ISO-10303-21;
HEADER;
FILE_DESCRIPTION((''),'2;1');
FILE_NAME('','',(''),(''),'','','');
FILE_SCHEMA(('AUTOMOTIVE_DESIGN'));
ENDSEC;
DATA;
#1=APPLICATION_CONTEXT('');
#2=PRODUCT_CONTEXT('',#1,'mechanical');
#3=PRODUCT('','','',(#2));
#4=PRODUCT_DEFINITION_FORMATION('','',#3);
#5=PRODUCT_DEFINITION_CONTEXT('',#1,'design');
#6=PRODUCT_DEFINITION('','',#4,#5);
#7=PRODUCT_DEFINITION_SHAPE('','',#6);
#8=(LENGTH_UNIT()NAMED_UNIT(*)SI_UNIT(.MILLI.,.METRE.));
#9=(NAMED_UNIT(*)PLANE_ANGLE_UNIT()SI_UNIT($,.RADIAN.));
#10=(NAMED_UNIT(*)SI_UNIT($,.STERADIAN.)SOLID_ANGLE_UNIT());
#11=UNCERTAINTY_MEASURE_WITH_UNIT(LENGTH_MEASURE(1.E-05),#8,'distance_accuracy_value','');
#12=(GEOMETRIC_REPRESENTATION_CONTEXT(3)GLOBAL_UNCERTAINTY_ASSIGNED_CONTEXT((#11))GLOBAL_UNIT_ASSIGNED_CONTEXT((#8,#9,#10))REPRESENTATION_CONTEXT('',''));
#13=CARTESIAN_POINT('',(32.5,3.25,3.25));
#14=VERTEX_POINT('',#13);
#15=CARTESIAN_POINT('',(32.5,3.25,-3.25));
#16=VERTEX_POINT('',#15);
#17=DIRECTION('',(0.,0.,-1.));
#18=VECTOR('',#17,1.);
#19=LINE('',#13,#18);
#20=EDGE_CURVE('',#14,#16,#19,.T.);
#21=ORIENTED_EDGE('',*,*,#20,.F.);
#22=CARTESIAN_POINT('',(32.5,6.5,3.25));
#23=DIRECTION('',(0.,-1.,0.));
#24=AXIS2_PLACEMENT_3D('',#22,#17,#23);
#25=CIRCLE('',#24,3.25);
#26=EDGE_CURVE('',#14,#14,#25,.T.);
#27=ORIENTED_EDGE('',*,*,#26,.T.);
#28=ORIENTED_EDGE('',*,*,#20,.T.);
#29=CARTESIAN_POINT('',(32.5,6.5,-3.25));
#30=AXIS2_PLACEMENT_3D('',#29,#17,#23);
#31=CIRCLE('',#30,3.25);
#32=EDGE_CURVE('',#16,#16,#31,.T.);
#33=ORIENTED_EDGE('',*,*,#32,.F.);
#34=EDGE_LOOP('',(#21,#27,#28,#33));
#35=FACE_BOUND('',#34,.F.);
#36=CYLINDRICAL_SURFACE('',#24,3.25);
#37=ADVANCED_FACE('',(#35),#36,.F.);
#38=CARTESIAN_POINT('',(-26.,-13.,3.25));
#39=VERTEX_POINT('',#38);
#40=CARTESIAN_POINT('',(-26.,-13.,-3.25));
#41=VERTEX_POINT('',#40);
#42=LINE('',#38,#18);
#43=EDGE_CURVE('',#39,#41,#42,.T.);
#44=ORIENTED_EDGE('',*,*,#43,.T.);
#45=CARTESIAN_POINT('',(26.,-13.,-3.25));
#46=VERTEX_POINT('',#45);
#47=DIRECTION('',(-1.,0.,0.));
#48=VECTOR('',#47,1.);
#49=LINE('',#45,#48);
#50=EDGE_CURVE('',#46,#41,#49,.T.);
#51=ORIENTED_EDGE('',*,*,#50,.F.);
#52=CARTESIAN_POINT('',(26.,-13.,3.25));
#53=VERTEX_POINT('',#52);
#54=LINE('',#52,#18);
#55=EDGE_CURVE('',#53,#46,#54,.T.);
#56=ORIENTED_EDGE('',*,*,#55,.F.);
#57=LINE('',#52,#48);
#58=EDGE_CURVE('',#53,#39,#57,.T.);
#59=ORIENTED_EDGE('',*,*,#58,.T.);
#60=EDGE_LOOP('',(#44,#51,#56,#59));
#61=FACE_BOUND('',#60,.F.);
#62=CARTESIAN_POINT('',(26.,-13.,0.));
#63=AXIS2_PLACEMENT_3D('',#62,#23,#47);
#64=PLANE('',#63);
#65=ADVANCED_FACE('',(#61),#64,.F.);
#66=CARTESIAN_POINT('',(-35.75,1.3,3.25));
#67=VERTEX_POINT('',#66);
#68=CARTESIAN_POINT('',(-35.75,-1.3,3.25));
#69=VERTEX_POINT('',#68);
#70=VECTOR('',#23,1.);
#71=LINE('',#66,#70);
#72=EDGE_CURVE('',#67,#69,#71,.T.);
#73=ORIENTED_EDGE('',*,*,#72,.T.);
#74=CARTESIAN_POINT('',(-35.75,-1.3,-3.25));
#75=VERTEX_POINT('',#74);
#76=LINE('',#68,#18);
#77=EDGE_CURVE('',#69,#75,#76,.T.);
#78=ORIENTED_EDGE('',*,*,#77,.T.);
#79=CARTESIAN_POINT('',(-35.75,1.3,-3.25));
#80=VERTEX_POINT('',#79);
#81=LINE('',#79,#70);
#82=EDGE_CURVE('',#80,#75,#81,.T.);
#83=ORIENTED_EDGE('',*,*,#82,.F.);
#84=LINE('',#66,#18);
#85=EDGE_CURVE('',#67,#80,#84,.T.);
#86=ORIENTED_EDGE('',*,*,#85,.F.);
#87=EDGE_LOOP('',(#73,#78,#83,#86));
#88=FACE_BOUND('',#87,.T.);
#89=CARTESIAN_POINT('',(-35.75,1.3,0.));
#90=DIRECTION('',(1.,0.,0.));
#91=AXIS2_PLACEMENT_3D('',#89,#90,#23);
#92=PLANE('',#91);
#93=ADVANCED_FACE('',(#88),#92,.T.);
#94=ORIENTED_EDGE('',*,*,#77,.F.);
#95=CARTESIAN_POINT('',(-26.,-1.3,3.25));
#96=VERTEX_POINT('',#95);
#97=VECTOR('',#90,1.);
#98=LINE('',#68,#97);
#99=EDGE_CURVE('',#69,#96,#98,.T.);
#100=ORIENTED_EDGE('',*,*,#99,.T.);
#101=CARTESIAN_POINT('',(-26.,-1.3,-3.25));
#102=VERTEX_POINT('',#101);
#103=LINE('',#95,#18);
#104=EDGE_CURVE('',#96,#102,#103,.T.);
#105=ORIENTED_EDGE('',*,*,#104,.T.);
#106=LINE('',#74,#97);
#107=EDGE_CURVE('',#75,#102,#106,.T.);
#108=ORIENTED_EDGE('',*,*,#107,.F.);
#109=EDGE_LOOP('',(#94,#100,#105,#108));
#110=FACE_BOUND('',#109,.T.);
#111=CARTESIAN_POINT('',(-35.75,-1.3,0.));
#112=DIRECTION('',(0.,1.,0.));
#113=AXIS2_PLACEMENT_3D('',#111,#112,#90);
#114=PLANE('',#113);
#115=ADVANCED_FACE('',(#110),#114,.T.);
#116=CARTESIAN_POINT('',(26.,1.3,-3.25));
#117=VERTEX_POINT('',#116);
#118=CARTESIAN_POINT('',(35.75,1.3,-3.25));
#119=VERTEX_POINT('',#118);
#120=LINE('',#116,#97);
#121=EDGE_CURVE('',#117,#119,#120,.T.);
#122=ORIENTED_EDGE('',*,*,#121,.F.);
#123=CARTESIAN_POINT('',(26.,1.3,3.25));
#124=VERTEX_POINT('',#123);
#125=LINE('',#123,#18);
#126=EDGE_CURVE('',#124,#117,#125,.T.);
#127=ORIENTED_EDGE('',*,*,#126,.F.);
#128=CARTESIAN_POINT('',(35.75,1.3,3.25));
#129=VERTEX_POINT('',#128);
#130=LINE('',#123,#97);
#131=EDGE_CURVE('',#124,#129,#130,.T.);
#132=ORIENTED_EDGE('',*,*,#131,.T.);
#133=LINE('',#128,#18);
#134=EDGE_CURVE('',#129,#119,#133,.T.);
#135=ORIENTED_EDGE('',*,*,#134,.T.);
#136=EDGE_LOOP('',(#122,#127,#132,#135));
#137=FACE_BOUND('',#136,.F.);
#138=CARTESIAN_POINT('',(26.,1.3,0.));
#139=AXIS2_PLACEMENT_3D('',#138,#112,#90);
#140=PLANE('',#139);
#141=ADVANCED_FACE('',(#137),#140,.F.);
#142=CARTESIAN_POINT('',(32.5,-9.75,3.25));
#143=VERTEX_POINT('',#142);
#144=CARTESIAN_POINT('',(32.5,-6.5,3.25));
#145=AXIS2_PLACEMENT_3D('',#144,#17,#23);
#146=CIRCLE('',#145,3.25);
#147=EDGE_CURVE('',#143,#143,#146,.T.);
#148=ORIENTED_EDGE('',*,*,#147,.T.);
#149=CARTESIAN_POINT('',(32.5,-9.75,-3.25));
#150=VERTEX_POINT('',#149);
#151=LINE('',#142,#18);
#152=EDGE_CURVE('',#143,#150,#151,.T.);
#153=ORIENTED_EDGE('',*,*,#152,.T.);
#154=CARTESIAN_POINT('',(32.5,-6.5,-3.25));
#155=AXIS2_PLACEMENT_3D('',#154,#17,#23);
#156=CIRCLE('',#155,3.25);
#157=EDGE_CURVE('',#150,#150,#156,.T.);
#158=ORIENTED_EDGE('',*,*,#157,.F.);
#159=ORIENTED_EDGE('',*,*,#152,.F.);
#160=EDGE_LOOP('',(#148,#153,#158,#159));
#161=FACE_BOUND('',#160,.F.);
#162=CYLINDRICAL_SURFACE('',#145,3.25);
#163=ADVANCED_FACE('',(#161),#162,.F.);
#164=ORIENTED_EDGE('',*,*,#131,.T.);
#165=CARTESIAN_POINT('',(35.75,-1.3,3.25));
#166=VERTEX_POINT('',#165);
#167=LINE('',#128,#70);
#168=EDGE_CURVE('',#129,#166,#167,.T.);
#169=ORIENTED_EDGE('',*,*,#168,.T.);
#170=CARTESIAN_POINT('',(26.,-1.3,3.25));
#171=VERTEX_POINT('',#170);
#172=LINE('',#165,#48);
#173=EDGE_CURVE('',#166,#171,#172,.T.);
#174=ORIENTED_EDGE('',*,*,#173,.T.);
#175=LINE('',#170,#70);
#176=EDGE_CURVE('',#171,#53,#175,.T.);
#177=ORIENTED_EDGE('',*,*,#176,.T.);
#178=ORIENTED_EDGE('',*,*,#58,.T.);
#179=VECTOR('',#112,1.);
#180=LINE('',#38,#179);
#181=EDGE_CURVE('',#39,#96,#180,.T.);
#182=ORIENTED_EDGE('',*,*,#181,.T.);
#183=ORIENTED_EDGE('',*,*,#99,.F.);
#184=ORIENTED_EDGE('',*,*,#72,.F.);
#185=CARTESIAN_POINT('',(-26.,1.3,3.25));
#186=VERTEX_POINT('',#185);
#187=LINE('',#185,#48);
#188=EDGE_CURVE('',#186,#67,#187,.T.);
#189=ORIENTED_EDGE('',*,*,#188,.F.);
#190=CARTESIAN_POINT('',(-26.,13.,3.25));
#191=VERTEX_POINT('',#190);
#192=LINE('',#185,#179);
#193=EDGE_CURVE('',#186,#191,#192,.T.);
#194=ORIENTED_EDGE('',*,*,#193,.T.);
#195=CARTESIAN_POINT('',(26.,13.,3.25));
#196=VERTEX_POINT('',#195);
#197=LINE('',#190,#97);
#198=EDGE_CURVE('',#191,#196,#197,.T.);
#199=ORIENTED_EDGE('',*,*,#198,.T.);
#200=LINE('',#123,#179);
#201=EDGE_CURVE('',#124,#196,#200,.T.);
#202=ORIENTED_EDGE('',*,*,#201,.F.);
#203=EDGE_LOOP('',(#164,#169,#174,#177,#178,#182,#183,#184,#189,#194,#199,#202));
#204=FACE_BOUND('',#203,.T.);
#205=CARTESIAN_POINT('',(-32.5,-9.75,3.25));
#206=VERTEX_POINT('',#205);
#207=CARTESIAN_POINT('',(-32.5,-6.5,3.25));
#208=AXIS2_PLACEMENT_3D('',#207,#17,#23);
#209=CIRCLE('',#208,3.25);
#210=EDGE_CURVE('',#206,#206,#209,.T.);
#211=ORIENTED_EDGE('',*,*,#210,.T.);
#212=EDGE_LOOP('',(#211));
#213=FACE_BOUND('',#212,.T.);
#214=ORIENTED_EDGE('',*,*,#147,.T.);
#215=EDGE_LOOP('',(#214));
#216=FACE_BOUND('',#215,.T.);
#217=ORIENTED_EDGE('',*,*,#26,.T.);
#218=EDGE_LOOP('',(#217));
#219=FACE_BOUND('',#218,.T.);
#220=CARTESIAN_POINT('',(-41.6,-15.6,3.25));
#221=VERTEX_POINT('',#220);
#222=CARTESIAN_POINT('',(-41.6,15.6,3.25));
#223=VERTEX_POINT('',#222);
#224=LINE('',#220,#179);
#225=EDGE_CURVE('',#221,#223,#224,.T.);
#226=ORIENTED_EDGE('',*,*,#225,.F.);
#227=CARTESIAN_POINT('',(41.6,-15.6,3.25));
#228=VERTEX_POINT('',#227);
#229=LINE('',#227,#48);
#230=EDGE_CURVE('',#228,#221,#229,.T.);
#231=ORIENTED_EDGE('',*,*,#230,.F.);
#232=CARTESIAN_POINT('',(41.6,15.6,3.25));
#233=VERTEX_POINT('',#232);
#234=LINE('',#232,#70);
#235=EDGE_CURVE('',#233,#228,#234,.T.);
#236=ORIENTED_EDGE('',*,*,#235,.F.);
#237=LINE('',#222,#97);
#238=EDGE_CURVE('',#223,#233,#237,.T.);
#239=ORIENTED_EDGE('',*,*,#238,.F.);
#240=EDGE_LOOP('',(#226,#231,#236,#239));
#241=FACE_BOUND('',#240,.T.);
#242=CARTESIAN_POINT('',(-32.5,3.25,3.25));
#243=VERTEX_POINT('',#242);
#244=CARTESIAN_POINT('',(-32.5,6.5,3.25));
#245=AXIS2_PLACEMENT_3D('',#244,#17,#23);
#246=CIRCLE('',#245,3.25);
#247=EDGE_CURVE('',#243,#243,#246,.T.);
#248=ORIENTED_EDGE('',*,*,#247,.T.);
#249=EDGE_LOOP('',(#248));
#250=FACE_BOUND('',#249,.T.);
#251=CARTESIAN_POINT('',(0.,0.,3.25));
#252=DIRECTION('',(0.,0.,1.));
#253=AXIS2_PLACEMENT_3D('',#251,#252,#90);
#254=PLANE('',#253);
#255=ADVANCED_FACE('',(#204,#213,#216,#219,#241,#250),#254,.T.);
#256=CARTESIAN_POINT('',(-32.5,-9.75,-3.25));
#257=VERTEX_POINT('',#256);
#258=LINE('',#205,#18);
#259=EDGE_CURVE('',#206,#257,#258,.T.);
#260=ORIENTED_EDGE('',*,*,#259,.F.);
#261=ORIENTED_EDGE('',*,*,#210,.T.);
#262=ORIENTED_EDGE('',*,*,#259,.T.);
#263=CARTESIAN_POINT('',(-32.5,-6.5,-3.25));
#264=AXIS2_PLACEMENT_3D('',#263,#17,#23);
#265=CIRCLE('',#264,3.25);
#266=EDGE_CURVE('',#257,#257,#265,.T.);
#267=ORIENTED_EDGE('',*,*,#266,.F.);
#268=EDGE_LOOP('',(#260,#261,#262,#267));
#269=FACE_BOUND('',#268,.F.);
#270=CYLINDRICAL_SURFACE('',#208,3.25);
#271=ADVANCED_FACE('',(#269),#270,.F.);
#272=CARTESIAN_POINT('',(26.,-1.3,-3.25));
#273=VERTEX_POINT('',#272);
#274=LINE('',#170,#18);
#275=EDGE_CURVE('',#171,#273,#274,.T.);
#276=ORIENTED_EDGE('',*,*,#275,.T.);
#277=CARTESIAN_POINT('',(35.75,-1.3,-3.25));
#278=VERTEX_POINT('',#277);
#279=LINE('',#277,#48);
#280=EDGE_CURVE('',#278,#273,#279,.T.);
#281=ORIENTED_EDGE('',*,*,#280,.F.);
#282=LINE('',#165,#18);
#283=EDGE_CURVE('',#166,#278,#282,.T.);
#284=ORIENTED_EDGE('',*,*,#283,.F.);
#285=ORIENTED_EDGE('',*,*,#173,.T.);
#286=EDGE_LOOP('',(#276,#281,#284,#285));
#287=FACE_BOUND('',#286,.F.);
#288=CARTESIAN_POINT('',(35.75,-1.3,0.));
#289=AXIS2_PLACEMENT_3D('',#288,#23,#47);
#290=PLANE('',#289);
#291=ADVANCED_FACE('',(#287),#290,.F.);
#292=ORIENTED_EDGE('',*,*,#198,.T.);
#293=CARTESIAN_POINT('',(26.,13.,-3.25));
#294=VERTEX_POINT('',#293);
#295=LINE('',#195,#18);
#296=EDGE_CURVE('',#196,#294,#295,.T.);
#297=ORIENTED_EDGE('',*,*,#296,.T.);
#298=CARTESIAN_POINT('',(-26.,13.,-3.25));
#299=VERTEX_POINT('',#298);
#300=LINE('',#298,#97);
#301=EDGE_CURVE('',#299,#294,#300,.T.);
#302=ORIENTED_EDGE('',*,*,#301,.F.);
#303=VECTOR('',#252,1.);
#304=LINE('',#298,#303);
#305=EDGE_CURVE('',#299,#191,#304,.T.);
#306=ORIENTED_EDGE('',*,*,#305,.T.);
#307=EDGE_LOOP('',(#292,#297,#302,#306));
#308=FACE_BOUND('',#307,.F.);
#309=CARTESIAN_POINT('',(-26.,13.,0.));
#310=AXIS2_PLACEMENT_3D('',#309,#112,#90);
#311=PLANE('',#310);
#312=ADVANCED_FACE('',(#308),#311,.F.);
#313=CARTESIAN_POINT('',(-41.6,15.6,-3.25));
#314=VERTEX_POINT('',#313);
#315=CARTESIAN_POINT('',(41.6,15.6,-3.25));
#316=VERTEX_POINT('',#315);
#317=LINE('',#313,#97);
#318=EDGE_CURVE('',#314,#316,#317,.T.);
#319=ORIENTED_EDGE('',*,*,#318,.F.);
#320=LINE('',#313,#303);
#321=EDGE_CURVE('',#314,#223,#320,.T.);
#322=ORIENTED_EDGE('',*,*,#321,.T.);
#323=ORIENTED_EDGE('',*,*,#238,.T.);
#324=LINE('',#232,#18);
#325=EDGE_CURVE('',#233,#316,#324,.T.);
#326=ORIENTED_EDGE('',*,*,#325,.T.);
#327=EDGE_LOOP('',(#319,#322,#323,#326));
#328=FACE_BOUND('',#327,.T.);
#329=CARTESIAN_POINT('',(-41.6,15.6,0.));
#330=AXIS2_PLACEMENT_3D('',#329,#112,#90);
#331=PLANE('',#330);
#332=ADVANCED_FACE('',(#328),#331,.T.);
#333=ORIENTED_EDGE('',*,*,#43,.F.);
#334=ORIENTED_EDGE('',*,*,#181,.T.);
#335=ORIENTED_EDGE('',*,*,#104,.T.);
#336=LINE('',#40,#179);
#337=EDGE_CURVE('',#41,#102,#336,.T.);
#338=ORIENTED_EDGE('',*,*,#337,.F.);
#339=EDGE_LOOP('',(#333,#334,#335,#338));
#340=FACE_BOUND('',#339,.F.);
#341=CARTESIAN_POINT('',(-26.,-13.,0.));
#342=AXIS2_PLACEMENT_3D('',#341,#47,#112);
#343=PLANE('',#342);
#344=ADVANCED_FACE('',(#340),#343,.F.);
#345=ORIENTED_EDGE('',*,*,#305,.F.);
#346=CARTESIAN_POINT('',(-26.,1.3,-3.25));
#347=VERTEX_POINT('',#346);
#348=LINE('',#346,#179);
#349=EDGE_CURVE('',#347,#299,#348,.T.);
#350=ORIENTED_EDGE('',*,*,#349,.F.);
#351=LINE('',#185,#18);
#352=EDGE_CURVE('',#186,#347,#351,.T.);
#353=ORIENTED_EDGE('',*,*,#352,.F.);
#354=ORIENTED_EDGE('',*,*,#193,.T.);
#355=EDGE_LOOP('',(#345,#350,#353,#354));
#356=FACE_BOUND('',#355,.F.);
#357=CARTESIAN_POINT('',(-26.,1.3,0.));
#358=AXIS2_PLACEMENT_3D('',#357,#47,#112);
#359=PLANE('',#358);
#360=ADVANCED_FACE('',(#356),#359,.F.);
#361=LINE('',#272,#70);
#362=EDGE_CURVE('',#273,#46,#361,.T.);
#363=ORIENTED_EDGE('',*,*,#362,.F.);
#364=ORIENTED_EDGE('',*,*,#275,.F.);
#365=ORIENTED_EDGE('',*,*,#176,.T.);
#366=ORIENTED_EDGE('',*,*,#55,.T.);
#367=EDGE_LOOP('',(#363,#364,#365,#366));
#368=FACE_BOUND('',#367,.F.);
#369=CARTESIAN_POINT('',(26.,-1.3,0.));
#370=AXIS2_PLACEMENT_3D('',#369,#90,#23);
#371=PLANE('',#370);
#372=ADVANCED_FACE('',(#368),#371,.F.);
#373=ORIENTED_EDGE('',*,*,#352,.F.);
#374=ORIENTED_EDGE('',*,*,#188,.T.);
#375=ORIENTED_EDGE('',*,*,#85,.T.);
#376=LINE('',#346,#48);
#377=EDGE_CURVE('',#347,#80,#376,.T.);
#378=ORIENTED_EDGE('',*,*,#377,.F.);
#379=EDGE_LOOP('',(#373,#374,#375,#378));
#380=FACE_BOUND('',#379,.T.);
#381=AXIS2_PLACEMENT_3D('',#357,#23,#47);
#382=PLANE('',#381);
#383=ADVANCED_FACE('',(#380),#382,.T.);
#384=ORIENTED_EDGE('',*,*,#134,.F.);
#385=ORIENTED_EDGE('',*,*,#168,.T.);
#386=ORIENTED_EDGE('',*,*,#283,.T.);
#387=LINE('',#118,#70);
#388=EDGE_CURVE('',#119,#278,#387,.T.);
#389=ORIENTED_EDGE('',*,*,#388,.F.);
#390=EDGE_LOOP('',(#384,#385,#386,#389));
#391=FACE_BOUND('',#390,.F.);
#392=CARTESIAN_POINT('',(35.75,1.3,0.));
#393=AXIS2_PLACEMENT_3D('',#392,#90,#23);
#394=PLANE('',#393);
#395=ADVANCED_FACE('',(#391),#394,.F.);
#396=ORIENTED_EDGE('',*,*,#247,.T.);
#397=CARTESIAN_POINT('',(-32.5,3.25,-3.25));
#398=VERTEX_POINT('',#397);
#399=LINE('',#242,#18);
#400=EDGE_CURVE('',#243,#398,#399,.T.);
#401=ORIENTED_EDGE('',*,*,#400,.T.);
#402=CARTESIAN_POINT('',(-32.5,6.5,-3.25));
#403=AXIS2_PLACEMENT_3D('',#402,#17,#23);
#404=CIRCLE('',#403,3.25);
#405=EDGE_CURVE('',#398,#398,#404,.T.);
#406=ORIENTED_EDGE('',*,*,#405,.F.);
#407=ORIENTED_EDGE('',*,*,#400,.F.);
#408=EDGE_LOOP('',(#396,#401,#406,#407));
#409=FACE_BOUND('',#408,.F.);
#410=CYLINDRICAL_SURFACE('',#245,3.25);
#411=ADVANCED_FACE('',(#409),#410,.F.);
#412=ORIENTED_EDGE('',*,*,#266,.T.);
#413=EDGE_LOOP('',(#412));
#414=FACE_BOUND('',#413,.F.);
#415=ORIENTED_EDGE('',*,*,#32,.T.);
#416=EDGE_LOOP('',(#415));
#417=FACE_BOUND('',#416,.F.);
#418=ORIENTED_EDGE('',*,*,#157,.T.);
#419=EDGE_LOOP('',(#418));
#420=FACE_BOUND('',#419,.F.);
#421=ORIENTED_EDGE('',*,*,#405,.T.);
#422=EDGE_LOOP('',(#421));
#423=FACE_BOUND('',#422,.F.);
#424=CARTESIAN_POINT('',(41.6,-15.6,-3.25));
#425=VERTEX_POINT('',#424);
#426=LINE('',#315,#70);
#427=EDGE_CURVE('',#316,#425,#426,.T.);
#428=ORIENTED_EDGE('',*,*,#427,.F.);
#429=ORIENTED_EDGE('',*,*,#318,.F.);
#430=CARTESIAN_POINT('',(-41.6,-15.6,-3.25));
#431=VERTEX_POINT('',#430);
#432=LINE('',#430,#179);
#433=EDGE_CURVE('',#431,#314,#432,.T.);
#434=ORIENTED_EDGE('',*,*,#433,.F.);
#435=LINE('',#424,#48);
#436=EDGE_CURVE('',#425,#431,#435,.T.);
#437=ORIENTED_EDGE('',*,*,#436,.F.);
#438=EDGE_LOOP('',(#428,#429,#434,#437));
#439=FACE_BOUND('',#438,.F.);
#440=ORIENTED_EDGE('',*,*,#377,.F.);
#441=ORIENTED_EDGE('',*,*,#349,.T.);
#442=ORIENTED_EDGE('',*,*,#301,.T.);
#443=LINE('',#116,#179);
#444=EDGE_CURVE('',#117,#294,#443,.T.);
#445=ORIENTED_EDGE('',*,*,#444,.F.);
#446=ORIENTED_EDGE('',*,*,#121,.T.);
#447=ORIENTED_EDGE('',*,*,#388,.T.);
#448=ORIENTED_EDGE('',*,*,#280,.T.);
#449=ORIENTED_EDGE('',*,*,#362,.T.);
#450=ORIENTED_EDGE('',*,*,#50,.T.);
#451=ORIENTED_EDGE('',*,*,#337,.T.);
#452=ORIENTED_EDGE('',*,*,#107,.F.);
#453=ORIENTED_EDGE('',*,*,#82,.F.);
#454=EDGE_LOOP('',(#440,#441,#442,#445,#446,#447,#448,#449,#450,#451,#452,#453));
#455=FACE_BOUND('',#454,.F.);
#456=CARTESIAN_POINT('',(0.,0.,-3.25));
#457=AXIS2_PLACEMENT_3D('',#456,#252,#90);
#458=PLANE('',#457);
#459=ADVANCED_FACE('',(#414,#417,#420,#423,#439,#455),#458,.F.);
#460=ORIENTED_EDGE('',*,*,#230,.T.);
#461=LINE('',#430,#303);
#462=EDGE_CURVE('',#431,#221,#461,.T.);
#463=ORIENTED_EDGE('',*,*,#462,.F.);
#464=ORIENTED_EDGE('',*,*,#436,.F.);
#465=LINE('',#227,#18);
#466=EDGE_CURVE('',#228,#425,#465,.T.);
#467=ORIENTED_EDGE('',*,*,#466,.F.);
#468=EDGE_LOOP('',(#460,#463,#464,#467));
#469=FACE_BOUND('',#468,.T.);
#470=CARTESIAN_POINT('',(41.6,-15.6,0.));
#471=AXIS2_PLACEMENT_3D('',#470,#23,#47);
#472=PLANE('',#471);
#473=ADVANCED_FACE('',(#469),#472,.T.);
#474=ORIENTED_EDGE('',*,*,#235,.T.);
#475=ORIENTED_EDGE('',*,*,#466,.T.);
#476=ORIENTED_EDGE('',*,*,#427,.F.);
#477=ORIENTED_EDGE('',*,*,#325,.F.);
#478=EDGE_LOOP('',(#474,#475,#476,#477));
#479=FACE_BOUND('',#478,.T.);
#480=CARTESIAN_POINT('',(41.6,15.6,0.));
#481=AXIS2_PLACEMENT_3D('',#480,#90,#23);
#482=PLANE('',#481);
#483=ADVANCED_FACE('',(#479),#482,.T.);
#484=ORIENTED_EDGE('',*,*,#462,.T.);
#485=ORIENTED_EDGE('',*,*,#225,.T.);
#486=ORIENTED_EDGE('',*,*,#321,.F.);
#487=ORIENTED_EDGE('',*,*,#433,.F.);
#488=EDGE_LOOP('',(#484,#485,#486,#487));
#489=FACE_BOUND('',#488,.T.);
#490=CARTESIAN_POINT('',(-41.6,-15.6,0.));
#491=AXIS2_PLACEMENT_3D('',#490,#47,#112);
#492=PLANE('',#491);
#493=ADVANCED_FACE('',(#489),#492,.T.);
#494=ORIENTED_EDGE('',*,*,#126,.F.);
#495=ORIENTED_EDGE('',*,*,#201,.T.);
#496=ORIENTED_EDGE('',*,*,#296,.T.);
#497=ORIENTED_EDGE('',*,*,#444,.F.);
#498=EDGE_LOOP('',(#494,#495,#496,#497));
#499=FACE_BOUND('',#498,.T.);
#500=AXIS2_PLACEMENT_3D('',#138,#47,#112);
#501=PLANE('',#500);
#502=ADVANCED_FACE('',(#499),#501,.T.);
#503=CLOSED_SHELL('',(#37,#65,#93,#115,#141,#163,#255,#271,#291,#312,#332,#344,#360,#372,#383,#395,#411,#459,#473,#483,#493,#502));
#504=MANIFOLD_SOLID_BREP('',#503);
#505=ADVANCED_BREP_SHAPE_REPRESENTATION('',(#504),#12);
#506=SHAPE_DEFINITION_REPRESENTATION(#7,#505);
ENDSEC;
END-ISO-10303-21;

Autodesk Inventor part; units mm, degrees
ref_plane "YZ Plane" through (0, 0, 0) normal (1, 0, 0) x (0, 1, 0)
ref_plane "XZ Plane" through (0, 0, 0) normal (0, 1, 0) x (-1, 0, 0)
ref_plane "XY Plane" through (0, 0, 0) normal (0, 0, 1) x (1, 0, 0)
sketch "Sketch1" plane through (0, 0, 0) normal (0, 0, 1) x (1, 0, 0)
  line L0 (-26, 13) -> (26, 13)
  line L1 (26, -13) -> (-26, -13)
  line L2 (-26, 13) -> (26, -13) construction
  line L3 (26, 13) -> (-26, -13) construction
  line L4 (-41.6, 15.6) -> (41.6, 15.6)
  line L5 (41.6, 15.6) -> (41.6, -15.6)
  line L6 (41.6, -15.6) -> (-41.6, -15.6)
  line L7 (-41.6, -15.6) -> (-41.6, 15.6)
  line L8 (-41.6, 15.6) -> (41.6, -15.6) construction
  line L9 (41.6, 15.6) -> (-41.6, -15.6) construction
  line L10 (-26, 1.3) -> (-35.75, 1.3)
  line L11 (-35.75, 1.3) -> (-35.75, -1.3)
  line L12 (-35.75, -1.3) -> (-26, -1.3)
  line L13 (26, 1.3) -> (35.75, 1.3)
  line L14 (35.75, 1.3) -> (35.75, -1.3)
  line L15 (35.75, -1.3) -> (26, -1.3)
  line L16 (-26, 1.3) -> (-26, 13)
  line L17 (-26, -13) -> (-26, -1.3)
  line L18 (26, -1.3) -> (26, -13)
  line L19 (26, 1.3) -> (26, 13)
  point P0 (0, 0)
  point P1 (-35.75, 0)
  point P2 (0, 0)
  dimension "CInt" = 52
  dimension "LInt" = 26
  dimension "Cext" = 83.2
  dimension "Lext" = 31.2
  dimension "Cpeq" = 9.75
  dimension "Lpeq" = 2.6
  dimension "d10" = 9.75
  dimension "d11" = 2.6
extrude "Extrusion1" add sketch "Sketch1" along normal mid plane 6.5
sketch "Sketch8" plane through (0, 0, 3.25) normal (0, 0, 1) x (1, 0, 0)
  point P0 (0, 0)
hole "Hole1" at (-32.5, 6.5, 3.25) direction (0, 0, -1) diameter 6.5 end through all
pattern_linear "Rectangular Pattern1" count 2 spacing 13 along (0, -1, 0) of "Hole1"
hole "Hole2" at (32.5, 6.5, 3.25) direction (0, 0, -1) diameter 6.5 end through all
pattern_linear "Rectangular Pattern2" count 2 spacing 13 along (0, -1, 0) of "Hole2"
properties part number "DandoBom"
